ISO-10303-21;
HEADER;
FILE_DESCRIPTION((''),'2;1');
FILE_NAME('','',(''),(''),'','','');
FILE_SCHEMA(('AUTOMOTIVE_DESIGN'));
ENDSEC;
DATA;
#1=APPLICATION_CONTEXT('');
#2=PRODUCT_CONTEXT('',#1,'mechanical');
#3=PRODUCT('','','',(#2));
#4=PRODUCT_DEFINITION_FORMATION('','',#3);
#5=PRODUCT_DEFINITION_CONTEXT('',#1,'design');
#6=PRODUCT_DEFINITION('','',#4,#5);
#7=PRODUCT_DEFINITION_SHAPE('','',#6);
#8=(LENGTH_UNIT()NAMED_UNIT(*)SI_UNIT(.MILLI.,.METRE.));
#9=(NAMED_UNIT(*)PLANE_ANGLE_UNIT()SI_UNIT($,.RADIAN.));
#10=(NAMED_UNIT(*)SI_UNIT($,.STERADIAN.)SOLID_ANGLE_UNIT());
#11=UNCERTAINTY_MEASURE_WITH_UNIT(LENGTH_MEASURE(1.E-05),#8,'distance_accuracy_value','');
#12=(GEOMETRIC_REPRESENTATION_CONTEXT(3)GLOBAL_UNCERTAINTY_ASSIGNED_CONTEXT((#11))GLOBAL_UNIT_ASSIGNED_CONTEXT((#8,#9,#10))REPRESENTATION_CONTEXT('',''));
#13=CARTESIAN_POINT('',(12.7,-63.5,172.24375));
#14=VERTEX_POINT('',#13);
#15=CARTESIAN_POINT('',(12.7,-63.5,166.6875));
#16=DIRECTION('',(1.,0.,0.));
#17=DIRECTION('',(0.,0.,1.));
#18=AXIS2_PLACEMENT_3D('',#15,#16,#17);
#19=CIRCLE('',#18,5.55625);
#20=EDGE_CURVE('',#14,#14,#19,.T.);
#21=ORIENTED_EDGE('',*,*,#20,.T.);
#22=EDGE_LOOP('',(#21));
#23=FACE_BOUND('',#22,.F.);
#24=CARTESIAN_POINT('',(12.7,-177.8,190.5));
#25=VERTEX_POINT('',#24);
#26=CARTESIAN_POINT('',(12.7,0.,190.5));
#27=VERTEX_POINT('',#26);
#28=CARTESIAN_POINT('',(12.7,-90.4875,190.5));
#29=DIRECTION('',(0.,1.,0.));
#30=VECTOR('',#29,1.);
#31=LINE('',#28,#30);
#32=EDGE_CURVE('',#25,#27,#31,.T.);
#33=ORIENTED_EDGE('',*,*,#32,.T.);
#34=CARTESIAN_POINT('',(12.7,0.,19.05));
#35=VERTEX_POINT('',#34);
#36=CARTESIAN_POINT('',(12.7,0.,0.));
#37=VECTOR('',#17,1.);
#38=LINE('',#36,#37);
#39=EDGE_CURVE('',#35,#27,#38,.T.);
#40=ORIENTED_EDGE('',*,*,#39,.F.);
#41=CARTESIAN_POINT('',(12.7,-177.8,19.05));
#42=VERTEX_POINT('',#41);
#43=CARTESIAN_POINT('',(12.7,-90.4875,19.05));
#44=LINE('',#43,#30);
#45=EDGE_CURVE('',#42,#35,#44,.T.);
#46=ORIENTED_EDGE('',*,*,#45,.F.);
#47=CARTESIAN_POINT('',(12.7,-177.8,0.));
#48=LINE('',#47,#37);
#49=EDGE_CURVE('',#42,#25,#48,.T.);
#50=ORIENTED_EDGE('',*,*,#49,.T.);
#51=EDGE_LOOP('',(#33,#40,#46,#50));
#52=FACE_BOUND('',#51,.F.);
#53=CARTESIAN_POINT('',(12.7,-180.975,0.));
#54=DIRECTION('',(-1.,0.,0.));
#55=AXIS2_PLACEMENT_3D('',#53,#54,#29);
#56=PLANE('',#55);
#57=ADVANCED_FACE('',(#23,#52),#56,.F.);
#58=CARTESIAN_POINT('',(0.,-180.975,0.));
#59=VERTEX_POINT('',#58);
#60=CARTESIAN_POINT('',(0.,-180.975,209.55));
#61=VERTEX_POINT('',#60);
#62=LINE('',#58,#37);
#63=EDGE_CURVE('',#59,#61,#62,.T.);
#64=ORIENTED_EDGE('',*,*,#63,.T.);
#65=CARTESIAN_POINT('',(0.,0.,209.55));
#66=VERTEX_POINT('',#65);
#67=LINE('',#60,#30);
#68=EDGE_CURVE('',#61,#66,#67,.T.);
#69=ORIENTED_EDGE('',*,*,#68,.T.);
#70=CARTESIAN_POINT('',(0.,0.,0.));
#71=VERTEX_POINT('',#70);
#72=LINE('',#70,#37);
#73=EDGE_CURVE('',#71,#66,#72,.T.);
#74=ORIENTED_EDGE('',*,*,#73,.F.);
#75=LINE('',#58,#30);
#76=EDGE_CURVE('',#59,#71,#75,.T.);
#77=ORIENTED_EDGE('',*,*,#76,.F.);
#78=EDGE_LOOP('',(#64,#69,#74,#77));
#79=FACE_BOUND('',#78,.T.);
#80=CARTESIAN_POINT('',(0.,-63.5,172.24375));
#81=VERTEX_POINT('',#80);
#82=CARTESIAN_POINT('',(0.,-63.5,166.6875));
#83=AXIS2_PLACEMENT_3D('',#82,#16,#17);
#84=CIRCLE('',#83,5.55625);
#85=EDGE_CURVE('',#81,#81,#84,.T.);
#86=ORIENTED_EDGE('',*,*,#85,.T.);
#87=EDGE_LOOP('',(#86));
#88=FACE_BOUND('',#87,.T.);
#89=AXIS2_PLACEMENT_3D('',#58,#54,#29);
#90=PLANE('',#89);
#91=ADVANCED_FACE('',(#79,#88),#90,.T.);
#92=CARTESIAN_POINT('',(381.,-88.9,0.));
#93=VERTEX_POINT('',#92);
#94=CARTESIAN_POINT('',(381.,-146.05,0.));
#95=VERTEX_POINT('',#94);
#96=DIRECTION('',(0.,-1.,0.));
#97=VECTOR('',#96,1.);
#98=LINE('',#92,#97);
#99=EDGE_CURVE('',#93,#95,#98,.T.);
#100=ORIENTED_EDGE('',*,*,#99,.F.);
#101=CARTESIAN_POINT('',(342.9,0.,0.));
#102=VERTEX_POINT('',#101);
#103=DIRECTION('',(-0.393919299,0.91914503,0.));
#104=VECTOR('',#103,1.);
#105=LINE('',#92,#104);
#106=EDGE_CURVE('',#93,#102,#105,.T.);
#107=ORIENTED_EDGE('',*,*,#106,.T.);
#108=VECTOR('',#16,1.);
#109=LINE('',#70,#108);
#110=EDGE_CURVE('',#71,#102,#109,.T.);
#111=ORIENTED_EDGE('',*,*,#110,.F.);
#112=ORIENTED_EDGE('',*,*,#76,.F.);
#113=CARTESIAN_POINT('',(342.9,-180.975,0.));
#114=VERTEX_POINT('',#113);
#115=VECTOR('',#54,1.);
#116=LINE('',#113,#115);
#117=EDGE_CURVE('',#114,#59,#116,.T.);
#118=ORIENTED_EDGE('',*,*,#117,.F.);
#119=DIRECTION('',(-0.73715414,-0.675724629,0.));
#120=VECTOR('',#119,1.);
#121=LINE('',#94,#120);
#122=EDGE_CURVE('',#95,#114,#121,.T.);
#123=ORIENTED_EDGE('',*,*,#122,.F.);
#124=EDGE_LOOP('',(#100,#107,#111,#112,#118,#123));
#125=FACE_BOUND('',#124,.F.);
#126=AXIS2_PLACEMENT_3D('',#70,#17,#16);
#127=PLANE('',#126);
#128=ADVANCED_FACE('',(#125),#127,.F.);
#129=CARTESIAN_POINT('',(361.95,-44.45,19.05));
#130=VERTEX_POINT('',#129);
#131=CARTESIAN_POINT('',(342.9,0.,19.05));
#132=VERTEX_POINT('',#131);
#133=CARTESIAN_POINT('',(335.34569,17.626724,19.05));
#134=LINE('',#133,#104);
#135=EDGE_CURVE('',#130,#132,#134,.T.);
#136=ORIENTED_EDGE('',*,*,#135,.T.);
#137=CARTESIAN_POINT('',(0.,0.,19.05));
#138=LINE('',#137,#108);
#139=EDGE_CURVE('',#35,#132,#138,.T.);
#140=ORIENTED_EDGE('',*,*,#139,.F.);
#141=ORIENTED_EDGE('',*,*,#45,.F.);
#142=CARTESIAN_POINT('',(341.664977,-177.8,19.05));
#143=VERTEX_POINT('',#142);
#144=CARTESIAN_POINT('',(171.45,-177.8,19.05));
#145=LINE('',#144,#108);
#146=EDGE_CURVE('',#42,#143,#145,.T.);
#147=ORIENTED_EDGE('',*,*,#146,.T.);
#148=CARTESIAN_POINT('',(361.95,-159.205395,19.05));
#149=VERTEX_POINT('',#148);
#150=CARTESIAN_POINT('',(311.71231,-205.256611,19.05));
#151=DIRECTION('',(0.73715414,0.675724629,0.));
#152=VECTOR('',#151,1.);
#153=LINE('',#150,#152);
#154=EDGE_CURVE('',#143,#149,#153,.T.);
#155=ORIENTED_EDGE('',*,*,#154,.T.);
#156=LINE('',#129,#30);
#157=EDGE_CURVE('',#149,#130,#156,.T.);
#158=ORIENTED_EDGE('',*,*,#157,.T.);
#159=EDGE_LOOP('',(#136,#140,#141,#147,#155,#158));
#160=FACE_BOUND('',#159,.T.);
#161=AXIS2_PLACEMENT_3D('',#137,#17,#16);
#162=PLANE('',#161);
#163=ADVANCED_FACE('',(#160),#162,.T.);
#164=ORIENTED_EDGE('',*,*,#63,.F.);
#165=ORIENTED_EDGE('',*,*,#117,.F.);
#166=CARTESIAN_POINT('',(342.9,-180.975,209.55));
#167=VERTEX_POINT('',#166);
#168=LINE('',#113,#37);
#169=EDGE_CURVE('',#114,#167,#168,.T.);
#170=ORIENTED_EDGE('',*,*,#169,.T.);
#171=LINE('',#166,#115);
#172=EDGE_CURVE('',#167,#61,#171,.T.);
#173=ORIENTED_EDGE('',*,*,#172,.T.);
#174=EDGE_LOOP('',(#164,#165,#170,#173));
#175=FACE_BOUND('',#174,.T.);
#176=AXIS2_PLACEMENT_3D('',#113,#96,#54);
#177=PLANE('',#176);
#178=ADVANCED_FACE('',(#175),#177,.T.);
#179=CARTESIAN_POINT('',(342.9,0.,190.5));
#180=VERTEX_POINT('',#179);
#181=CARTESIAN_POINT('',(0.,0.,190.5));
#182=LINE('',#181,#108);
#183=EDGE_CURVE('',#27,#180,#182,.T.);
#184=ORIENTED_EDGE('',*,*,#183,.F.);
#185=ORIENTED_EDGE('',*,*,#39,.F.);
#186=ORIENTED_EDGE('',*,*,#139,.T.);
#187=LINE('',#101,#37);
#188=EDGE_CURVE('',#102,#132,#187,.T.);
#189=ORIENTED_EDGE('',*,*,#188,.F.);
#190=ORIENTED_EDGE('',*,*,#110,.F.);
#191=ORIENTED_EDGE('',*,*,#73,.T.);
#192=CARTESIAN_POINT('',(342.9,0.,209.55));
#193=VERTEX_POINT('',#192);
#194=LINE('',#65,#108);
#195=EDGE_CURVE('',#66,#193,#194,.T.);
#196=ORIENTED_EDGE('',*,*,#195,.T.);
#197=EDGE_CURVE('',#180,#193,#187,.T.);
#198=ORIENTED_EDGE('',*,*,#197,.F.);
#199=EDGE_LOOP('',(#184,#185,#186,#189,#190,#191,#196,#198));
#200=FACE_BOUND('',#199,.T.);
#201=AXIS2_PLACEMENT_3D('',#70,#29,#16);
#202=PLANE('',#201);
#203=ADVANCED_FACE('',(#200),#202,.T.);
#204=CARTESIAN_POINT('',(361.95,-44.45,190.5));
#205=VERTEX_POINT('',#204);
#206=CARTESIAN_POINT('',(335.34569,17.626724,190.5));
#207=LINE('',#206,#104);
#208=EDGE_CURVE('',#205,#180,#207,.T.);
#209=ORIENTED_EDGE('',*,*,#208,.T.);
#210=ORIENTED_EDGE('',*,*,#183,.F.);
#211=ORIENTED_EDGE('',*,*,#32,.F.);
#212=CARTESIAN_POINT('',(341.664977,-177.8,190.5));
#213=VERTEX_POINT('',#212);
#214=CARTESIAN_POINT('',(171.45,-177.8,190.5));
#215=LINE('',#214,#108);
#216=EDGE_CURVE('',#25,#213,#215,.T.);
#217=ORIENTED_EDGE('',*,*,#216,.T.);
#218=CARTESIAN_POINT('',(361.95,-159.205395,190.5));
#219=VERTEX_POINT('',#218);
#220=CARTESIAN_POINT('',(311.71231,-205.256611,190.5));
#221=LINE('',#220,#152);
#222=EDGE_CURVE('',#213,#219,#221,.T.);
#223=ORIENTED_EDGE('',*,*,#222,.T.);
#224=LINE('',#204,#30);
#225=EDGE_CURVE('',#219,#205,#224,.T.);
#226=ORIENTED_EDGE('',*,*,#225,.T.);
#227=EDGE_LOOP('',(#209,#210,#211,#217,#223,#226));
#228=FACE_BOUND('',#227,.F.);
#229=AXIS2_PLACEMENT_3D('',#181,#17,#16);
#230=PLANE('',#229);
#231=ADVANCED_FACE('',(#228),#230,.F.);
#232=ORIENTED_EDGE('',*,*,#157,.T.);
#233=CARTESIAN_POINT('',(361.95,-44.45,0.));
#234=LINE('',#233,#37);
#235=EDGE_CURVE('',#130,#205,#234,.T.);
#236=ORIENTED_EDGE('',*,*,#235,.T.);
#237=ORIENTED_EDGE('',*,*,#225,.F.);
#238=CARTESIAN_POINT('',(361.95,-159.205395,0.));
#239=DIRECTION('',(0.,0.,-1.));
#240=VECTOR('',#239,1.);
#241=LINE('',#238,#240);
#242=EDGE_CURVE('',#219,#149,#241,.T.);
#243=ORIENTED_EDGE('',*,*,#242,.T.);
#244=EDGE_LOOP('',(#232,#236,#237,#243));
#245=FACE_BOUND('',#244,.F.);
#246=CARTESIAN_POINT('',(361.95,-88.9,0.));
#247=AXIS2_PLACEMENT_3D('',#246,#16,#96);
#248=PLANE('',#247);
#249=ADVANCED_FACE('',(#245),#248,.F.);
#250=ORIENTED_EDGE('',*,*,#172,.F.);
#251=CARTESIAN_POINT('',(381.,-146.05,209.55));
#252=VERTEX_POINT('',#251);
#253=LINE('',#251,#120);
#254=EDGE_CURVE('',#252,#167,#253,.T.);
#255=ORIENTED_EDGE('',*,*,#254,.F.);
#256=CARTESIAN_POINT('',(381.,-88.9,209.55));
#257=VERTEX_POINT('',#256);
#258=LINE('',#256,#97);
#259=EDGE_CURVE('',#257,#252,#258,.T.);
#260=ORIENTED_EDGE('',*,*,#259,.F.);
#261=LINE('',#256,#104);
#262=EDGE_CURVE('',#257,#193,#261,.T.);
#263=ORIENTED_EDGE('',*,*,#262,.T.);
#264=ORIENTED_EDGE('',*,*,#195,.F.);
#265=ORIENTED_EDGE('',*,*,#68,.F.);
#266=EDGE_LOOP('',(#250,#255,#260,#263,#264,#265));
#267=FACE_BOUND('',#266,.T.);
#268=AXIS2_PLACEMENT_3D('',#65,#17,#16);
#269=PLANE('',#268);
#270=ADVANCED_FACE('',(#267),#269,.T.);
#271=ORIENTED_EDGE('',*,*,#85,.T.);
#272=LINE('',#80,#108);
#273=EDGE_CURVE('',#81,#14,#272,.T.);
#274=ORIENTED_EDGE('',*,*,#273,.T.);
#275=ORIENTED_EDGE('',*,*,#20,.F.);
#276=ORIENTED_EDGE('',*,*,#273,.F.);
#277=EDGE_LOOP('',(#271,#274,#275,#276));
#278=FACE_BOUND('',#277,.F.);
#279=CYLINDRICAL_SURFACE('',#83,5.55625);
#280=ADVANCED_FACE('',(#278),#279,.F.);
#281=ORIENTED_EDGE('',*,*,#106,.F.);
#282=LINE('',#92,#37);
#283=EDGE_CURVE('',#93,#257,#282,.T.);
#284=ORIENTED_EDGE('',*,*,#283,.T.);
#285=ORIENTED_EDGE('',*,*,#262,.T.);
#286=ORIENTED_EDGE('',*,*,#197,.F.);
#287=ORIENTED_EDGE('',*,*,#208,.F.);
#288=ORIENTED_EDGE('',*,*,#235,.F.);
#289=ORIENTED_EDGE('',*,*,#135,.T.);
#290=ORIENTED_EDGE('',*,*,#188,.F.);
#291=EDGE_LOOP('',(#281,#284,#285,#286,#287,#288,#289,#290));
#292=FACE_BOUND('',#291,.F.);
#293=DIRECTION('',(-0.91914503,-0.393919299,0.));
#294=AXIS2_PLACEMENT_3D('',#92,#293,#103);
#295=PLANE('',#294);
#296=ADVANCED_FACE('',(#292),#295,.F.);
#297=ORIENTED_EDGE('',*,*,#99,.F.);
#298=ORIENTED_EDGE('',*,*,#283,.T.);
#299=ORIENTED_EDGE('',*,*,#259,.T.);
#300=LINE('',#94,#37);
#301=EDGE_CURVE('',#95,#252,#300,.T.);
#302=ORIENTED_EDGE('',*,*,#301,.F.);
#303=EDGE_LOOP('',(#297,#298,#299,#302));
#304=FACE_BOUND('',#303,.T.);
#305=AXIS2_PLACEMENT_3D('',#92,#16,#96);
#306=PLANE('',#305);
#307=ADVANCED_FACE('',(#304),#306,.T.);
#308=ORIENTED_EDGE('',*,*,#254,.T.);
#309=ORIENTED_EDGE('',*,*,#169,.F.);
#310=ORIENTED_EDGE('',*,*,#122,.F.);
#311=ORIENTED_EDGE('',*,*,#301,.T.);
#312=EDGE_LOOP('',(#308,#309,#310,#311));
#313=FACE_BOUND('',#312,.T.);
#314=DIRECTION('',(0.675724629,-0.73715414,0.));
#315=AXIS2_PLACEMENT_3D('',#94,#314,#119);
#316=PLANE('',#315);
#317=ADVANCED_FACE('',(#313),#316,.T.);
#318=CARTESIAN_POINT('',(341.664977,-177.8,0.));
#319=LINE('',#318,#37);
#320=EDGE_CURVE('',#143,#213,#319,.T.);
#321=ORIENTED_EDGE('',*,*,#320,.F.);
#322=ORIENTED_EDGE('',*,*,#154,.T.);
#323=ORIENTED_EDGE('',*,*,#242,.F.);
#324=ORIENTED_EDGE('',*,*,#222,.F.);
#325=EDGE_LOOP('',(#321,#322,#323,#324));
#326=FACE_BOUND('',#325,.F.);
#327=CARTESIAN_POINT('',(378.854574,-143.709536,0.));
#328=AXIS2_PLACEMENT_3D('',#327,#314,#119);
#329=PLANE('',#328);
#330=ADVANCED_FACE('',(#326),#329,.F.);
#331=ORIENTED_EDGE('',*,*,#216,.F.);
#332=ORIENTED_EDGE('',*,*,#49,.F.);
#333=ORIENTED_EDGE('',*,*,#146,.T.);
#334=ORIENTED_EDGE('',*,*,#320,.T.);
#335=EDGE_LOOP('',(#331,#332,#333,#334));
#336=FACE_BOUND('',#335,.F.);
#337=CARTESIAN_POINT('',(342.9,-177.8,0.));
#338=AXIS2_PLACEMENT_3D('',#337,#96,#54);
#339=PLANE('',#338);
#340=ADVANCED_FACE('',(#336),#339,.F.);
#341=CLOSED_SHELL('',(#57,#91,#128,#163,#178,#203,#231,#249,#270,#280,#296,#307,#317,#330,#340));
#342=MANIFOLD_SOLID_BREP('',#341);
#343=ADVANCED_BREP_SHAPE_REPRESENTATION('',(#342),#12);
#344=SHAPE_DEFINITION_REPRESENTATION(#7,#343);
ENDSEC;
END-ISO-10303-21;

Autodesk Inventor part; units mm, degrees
ref_plane "YZ Plane" through (0, 0, 0) normal (1, 0, 0) x (0, 1, 0)
ref_plane "XZ Plane" through (0, 0, 0) normal (0, 1, 0) x (-1, 0, 0)
ref_plane "XY Plane" through (0, 0, 0) normal (0, 0, 1) x (1, 0, 0)
sketch "Sketch1" plane through (0, 0, 0) normal (0, 0, 1) x (1, 0, 0)
  line L0 (0, 0) -> (342.9, 0)
  line L1 (342.9, 0) -> (342.9, -180.975)
  line L2 (342.9, -180.975) -> (0, -180.975)
  line L3 (0, -180.975) -> (0, 0)
  line L4 (342.9, -88.9) -> (381, -88.9)
  line L5 (381, -88.9) -> (381, -146.05)
  line L6 (381, -146.05) -> (342.9, -146.05)
  line L7 (342.9, -146.05) -> (342.9, -88.9)
  line L8 (381, -146.05) -> (342.9, -180.975)
  line L9 (381, -88.9) -> (342.9, 0)
  dimension "d0" = 342.9
  dimension "d1" = 180.975
  dimension "d2" = 88.9
  dimension "d3" = 34.925
  dimension "d4" = 38.1
extrude "Extrusion1" add sketch "Sketch1" along normal blind 209.55
shell "Shell1" thickness 19.05 removed faces 2 at (228.6, 0, 69.85) at (355.6, -29.6333, 139.7) ; own thickness 19.05 on faces at (114.3, -60.325, 209.55) (381, -127, 69.85) (114.3, -60.325, 0) ; own thickness 12.7 on faces at (0, -60.325, 69.85) ; own thickness 3.175 on faces at (114.3, -180.975, 69.85) (355.6, -169.3333, 69.85)
hole "Hole1" at (0, -63.5, 166.6875) direction (1, 0, 0) diameter 11.1125 end up to surface
properties part number "bin" material "Thermoplastic Resin"
